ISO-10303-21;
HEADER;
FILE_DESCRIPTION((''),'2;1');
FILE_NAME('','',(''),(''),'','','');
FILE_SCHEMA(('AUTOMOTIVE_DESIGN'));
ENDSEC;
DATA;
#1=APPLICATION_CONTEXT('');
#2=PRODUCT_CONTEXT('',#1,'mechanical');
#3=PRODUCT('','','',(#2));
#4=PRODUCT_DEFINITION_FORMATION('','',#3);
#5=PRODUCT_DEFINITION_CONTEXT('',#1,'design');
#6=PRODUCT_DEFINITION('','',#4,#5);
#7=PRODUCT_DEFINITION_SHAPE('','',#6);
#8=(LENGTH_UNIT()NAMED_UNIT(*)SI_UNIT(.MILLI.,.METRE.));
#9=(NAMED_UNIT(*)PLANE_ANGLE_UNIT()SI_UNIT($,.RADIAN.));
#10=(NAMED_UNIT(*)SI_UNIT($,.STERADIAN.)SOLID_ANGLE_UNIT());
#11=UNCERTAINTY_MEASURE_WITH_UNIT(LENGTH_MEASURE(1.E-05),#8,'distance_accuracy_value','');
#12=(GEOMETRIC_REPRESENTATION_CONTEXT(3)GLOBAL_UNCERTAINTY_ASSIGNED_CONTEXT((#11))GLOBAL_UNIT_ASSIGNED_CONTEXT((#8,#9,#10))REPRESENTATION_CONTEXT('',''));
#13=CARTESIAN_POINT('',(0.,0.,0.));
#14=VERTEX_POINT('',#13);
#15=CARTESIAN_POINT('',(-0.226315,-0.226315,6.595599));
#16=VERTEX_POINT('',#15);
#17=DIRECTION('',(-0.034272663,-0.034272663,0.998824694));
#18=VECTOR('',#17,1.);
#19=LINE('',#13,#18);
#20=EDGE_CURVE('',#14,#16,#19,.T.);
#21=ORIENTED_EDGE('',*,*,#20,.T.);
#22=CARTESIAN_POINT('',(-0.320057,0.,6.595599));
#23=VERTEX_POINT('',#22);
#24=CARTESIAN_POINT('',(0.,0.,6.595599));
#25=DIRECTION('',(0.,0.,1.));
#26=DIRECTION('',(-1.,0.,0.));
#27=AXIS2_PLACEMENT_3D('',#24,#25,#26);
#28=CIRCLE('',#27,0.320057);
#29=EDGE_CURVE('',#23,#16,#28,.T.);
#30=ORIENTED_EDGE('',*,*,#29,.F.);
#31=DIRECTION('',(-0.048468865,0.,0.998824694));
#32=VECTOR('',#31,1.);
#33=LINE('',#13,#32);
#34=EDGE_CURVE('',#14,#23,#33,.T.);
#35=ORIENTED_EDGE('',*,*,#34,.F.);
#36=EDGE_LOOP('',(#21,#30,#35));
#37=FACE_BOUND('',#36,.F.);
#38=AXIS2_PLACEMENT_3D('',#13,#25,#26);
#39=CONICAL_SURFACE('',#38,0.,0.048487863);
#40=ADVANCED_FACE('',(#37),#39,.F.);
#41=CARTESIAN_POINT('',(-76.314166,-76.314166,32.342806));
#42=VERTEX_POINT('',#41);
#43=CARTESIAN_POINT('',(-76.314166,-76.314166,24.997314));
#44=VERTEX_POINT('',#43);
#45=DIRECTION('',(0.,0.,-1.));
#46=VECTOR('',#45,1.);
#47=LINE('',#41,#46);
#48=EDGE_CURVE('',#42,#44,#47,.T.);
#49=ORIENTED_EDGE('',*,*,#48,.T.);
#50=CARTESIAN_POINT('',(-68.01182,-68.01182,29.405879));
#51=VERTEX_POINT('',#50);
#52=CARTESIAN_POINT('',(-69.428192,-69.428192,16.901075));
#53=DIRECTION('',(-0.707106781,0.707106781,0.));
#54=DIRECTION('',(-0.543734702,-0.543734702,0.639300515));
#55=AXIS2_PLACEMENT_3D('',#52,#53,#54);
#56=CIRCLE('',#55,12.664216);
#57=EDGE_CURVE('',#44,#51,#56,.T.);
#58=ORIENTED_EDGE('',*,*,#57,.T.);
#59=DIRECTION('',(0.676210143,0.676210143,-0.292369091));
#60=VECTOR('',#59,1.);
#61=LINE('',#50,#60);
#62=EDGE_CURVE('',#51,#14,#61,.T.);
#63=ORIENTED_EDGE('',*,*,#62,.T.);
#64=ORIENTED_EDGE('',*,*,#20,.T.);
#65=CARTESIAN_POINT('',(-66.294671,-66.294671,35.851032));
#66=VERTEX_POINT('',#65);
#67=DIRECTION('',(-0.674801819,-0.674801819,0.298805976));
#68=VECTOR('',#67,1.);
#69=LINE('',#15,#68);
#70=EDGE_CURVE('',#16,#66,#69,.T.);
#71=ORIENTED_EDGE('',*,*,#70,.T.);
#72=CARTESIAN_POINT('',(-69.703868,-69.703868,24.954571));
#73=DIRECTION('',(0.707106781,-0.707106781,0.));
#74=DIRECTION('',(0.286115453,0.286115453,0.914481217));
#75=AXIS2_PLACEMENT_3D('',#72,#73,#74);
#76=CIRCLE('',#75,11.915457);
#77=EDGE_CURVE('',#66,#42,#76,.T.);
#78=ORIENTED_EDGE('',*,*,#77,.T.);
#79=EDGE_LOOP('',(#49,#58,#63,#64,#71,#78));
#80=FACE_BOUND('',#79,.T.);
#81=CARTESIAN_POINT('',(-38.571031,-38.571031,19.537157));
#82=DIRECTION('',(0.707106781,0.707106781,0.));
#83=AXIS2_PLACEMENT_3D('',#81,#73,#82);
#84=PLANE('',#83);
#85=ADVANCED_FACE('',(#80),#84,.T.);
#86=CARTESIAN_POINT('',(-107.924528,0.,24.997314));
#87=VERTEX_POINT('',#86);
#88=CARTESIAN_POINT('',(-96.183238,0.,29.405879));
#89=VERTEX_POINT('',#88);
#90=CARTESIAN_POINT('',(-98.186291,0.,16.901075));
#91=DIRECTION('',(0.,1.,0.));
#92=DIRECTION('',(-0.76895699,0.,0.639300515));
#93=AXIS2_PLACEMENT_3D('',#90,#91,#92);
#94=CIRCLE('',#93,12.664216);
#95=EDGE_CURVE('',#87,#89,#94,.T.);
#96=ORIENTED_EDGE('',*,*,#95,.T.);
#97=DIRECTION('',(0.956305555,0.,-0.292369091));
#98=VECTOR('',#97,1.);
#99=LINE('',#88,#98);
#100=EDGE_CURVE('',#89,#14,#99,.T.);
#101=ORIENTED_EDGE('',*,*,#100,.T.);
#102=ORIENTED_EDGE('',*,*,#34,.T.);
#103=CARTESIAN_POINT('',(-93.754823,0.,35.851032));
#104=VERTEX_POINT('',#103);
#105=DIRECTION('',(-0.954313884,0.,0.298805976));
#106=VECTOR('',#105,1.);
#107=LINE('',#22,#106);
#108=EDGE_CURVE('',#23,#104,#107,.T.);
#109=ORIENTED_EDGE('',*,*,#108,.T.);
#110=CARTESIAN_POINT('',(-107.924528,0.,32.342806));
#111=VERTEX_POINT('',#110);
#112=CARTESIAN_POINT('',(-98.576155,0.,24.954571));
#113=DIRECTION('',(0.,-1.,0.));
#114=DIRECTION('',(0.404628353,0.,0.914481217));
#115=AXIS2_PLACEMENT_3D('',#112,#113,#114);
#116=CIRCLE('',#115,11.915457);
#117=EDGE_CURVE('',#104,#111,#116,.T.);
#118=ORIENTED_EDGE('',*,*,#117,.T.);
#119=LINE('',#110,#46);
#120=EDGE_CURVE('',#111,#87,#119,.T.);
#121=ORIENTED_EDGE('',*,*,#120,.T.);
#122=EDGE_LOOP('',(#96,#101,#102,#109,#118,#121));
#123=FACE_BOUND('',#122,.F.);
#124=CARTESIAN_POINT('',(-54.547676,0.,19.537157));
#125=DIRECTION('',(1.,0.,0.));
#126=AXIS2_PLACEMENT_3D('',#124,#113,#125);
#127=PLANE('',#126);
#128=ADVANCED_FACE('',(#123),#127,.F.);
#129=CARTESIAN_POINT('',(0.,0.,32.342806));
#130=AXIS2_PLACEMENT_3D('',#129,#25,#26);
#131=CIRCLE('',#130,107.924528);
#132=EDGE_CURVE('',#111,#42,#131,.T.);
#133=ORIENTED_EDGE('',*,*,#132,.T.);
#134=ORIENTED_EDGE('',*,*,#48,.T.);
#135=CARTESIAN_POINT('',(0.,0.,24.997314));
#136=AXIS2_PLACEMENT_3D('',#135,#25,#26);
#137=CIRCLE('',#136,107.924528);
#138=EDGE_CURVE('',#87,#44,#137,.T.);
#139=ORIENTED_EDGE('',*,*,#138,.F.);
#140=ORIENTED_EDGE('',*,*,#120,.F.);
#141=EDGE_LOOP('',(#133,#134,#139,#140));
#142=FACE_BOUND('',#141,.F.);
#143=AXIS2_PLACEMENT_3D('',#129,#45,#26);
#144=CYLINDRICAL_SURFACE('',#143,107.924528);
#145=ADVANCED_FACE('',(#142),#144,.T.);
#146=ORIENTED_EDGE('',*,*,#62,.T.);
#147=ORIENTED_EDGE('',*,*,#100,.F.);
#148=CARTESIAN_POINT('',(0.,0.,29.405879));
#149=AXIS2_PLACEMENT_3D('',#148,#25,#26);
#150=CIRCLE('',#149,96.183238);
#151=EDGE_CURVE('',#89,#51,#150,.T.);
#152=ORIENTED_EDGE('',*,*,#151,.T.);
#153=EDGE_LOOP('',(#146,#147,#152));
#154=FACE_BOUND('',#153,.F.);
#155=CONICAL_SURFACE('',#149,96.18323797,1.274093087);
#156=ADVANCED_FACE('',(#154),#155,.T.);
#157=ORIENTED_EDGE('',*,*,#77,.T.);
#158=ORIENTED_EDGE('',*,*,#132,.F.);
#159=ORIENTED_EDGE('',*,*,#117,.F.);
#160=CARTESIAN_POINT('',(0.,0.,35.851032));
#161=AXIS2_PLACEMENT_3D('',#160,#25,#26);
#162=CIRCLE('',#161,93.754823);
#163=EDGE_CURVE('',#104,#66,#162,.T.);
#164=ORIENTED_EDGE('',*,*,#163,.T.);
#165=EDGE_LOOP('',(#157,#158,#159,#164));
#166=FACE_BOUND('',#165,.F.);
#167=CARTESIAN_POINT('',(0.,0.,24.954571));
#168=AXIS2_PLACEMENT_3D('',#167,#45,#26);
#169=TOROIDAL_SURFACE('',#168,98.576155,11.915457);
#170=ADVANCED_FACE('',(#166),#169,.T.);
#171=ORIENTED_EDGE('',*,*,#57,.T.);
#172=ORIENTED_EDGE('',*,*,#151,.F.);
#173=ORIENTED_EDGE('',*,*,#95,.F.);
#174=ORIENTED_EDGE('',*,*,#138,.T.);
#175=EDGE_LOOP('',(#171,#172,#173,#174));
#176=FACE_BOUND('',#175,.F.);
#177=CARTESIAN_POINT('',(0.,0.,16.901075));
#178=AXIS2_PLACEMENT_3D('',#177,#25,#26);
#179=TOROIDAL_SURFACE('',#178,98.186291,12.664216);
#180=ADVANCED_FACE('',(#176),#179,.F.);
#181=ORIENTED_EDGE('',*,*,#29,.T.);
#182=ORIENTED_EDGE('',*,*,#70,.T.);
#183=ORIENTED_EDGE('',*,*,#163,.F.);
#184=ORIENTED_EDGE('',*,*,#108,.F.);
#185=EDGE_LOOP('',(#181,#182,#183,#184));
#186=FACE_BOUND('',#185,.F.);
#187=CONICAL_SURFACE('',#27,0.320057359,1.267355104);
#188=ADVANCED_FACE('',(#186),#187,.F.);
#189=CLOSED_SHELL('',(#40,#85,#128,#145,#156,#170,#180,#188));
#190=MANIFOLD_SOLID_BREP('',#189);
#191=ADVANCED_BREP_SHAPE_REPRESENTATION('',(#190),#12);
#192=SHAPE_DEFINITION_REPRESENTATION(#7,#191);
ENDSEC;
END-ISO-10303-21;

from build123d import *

# Parameters (mm, degrees)
F1_ANGLE = 45


# Not quite as in the source:
# - a feature names something its author has since deleted; it is built from what else it names


with BuildPart() as f1:
    # F0 (on Front) → F1 (revolve)
    with BuildSketch(Plane.XZ):
        with BuildLine():
            Line((0, 0), (-0.3200573587, 6.5955988818))
            Line((-0.3200573587, 6.5955988818), (-93.7548232766, 35.8510324721))
            ThreePointArc((-93.7548232766, 35.8510324721), (-101.4397958576, 36.5208008084), (-107.92452842, 32.3428064585))
            Line((-107.92452842, 32.3428064585), (-107.92452842, 24.9973144382))
            ThreePointArc((-107.92452842, 24.9973144382), (-102.6379346155, 28.7570956855), (-96.1832379704, 29.4058793942))
            Line((-96.1832379704, 29.4058793942), (0, 0))
        make_face()
    revolve(axis=Axis((0, 0, 59.7953810357), (0, 0, 1)), revolution_arc=F1_ANGLE)


solid = f1.part
